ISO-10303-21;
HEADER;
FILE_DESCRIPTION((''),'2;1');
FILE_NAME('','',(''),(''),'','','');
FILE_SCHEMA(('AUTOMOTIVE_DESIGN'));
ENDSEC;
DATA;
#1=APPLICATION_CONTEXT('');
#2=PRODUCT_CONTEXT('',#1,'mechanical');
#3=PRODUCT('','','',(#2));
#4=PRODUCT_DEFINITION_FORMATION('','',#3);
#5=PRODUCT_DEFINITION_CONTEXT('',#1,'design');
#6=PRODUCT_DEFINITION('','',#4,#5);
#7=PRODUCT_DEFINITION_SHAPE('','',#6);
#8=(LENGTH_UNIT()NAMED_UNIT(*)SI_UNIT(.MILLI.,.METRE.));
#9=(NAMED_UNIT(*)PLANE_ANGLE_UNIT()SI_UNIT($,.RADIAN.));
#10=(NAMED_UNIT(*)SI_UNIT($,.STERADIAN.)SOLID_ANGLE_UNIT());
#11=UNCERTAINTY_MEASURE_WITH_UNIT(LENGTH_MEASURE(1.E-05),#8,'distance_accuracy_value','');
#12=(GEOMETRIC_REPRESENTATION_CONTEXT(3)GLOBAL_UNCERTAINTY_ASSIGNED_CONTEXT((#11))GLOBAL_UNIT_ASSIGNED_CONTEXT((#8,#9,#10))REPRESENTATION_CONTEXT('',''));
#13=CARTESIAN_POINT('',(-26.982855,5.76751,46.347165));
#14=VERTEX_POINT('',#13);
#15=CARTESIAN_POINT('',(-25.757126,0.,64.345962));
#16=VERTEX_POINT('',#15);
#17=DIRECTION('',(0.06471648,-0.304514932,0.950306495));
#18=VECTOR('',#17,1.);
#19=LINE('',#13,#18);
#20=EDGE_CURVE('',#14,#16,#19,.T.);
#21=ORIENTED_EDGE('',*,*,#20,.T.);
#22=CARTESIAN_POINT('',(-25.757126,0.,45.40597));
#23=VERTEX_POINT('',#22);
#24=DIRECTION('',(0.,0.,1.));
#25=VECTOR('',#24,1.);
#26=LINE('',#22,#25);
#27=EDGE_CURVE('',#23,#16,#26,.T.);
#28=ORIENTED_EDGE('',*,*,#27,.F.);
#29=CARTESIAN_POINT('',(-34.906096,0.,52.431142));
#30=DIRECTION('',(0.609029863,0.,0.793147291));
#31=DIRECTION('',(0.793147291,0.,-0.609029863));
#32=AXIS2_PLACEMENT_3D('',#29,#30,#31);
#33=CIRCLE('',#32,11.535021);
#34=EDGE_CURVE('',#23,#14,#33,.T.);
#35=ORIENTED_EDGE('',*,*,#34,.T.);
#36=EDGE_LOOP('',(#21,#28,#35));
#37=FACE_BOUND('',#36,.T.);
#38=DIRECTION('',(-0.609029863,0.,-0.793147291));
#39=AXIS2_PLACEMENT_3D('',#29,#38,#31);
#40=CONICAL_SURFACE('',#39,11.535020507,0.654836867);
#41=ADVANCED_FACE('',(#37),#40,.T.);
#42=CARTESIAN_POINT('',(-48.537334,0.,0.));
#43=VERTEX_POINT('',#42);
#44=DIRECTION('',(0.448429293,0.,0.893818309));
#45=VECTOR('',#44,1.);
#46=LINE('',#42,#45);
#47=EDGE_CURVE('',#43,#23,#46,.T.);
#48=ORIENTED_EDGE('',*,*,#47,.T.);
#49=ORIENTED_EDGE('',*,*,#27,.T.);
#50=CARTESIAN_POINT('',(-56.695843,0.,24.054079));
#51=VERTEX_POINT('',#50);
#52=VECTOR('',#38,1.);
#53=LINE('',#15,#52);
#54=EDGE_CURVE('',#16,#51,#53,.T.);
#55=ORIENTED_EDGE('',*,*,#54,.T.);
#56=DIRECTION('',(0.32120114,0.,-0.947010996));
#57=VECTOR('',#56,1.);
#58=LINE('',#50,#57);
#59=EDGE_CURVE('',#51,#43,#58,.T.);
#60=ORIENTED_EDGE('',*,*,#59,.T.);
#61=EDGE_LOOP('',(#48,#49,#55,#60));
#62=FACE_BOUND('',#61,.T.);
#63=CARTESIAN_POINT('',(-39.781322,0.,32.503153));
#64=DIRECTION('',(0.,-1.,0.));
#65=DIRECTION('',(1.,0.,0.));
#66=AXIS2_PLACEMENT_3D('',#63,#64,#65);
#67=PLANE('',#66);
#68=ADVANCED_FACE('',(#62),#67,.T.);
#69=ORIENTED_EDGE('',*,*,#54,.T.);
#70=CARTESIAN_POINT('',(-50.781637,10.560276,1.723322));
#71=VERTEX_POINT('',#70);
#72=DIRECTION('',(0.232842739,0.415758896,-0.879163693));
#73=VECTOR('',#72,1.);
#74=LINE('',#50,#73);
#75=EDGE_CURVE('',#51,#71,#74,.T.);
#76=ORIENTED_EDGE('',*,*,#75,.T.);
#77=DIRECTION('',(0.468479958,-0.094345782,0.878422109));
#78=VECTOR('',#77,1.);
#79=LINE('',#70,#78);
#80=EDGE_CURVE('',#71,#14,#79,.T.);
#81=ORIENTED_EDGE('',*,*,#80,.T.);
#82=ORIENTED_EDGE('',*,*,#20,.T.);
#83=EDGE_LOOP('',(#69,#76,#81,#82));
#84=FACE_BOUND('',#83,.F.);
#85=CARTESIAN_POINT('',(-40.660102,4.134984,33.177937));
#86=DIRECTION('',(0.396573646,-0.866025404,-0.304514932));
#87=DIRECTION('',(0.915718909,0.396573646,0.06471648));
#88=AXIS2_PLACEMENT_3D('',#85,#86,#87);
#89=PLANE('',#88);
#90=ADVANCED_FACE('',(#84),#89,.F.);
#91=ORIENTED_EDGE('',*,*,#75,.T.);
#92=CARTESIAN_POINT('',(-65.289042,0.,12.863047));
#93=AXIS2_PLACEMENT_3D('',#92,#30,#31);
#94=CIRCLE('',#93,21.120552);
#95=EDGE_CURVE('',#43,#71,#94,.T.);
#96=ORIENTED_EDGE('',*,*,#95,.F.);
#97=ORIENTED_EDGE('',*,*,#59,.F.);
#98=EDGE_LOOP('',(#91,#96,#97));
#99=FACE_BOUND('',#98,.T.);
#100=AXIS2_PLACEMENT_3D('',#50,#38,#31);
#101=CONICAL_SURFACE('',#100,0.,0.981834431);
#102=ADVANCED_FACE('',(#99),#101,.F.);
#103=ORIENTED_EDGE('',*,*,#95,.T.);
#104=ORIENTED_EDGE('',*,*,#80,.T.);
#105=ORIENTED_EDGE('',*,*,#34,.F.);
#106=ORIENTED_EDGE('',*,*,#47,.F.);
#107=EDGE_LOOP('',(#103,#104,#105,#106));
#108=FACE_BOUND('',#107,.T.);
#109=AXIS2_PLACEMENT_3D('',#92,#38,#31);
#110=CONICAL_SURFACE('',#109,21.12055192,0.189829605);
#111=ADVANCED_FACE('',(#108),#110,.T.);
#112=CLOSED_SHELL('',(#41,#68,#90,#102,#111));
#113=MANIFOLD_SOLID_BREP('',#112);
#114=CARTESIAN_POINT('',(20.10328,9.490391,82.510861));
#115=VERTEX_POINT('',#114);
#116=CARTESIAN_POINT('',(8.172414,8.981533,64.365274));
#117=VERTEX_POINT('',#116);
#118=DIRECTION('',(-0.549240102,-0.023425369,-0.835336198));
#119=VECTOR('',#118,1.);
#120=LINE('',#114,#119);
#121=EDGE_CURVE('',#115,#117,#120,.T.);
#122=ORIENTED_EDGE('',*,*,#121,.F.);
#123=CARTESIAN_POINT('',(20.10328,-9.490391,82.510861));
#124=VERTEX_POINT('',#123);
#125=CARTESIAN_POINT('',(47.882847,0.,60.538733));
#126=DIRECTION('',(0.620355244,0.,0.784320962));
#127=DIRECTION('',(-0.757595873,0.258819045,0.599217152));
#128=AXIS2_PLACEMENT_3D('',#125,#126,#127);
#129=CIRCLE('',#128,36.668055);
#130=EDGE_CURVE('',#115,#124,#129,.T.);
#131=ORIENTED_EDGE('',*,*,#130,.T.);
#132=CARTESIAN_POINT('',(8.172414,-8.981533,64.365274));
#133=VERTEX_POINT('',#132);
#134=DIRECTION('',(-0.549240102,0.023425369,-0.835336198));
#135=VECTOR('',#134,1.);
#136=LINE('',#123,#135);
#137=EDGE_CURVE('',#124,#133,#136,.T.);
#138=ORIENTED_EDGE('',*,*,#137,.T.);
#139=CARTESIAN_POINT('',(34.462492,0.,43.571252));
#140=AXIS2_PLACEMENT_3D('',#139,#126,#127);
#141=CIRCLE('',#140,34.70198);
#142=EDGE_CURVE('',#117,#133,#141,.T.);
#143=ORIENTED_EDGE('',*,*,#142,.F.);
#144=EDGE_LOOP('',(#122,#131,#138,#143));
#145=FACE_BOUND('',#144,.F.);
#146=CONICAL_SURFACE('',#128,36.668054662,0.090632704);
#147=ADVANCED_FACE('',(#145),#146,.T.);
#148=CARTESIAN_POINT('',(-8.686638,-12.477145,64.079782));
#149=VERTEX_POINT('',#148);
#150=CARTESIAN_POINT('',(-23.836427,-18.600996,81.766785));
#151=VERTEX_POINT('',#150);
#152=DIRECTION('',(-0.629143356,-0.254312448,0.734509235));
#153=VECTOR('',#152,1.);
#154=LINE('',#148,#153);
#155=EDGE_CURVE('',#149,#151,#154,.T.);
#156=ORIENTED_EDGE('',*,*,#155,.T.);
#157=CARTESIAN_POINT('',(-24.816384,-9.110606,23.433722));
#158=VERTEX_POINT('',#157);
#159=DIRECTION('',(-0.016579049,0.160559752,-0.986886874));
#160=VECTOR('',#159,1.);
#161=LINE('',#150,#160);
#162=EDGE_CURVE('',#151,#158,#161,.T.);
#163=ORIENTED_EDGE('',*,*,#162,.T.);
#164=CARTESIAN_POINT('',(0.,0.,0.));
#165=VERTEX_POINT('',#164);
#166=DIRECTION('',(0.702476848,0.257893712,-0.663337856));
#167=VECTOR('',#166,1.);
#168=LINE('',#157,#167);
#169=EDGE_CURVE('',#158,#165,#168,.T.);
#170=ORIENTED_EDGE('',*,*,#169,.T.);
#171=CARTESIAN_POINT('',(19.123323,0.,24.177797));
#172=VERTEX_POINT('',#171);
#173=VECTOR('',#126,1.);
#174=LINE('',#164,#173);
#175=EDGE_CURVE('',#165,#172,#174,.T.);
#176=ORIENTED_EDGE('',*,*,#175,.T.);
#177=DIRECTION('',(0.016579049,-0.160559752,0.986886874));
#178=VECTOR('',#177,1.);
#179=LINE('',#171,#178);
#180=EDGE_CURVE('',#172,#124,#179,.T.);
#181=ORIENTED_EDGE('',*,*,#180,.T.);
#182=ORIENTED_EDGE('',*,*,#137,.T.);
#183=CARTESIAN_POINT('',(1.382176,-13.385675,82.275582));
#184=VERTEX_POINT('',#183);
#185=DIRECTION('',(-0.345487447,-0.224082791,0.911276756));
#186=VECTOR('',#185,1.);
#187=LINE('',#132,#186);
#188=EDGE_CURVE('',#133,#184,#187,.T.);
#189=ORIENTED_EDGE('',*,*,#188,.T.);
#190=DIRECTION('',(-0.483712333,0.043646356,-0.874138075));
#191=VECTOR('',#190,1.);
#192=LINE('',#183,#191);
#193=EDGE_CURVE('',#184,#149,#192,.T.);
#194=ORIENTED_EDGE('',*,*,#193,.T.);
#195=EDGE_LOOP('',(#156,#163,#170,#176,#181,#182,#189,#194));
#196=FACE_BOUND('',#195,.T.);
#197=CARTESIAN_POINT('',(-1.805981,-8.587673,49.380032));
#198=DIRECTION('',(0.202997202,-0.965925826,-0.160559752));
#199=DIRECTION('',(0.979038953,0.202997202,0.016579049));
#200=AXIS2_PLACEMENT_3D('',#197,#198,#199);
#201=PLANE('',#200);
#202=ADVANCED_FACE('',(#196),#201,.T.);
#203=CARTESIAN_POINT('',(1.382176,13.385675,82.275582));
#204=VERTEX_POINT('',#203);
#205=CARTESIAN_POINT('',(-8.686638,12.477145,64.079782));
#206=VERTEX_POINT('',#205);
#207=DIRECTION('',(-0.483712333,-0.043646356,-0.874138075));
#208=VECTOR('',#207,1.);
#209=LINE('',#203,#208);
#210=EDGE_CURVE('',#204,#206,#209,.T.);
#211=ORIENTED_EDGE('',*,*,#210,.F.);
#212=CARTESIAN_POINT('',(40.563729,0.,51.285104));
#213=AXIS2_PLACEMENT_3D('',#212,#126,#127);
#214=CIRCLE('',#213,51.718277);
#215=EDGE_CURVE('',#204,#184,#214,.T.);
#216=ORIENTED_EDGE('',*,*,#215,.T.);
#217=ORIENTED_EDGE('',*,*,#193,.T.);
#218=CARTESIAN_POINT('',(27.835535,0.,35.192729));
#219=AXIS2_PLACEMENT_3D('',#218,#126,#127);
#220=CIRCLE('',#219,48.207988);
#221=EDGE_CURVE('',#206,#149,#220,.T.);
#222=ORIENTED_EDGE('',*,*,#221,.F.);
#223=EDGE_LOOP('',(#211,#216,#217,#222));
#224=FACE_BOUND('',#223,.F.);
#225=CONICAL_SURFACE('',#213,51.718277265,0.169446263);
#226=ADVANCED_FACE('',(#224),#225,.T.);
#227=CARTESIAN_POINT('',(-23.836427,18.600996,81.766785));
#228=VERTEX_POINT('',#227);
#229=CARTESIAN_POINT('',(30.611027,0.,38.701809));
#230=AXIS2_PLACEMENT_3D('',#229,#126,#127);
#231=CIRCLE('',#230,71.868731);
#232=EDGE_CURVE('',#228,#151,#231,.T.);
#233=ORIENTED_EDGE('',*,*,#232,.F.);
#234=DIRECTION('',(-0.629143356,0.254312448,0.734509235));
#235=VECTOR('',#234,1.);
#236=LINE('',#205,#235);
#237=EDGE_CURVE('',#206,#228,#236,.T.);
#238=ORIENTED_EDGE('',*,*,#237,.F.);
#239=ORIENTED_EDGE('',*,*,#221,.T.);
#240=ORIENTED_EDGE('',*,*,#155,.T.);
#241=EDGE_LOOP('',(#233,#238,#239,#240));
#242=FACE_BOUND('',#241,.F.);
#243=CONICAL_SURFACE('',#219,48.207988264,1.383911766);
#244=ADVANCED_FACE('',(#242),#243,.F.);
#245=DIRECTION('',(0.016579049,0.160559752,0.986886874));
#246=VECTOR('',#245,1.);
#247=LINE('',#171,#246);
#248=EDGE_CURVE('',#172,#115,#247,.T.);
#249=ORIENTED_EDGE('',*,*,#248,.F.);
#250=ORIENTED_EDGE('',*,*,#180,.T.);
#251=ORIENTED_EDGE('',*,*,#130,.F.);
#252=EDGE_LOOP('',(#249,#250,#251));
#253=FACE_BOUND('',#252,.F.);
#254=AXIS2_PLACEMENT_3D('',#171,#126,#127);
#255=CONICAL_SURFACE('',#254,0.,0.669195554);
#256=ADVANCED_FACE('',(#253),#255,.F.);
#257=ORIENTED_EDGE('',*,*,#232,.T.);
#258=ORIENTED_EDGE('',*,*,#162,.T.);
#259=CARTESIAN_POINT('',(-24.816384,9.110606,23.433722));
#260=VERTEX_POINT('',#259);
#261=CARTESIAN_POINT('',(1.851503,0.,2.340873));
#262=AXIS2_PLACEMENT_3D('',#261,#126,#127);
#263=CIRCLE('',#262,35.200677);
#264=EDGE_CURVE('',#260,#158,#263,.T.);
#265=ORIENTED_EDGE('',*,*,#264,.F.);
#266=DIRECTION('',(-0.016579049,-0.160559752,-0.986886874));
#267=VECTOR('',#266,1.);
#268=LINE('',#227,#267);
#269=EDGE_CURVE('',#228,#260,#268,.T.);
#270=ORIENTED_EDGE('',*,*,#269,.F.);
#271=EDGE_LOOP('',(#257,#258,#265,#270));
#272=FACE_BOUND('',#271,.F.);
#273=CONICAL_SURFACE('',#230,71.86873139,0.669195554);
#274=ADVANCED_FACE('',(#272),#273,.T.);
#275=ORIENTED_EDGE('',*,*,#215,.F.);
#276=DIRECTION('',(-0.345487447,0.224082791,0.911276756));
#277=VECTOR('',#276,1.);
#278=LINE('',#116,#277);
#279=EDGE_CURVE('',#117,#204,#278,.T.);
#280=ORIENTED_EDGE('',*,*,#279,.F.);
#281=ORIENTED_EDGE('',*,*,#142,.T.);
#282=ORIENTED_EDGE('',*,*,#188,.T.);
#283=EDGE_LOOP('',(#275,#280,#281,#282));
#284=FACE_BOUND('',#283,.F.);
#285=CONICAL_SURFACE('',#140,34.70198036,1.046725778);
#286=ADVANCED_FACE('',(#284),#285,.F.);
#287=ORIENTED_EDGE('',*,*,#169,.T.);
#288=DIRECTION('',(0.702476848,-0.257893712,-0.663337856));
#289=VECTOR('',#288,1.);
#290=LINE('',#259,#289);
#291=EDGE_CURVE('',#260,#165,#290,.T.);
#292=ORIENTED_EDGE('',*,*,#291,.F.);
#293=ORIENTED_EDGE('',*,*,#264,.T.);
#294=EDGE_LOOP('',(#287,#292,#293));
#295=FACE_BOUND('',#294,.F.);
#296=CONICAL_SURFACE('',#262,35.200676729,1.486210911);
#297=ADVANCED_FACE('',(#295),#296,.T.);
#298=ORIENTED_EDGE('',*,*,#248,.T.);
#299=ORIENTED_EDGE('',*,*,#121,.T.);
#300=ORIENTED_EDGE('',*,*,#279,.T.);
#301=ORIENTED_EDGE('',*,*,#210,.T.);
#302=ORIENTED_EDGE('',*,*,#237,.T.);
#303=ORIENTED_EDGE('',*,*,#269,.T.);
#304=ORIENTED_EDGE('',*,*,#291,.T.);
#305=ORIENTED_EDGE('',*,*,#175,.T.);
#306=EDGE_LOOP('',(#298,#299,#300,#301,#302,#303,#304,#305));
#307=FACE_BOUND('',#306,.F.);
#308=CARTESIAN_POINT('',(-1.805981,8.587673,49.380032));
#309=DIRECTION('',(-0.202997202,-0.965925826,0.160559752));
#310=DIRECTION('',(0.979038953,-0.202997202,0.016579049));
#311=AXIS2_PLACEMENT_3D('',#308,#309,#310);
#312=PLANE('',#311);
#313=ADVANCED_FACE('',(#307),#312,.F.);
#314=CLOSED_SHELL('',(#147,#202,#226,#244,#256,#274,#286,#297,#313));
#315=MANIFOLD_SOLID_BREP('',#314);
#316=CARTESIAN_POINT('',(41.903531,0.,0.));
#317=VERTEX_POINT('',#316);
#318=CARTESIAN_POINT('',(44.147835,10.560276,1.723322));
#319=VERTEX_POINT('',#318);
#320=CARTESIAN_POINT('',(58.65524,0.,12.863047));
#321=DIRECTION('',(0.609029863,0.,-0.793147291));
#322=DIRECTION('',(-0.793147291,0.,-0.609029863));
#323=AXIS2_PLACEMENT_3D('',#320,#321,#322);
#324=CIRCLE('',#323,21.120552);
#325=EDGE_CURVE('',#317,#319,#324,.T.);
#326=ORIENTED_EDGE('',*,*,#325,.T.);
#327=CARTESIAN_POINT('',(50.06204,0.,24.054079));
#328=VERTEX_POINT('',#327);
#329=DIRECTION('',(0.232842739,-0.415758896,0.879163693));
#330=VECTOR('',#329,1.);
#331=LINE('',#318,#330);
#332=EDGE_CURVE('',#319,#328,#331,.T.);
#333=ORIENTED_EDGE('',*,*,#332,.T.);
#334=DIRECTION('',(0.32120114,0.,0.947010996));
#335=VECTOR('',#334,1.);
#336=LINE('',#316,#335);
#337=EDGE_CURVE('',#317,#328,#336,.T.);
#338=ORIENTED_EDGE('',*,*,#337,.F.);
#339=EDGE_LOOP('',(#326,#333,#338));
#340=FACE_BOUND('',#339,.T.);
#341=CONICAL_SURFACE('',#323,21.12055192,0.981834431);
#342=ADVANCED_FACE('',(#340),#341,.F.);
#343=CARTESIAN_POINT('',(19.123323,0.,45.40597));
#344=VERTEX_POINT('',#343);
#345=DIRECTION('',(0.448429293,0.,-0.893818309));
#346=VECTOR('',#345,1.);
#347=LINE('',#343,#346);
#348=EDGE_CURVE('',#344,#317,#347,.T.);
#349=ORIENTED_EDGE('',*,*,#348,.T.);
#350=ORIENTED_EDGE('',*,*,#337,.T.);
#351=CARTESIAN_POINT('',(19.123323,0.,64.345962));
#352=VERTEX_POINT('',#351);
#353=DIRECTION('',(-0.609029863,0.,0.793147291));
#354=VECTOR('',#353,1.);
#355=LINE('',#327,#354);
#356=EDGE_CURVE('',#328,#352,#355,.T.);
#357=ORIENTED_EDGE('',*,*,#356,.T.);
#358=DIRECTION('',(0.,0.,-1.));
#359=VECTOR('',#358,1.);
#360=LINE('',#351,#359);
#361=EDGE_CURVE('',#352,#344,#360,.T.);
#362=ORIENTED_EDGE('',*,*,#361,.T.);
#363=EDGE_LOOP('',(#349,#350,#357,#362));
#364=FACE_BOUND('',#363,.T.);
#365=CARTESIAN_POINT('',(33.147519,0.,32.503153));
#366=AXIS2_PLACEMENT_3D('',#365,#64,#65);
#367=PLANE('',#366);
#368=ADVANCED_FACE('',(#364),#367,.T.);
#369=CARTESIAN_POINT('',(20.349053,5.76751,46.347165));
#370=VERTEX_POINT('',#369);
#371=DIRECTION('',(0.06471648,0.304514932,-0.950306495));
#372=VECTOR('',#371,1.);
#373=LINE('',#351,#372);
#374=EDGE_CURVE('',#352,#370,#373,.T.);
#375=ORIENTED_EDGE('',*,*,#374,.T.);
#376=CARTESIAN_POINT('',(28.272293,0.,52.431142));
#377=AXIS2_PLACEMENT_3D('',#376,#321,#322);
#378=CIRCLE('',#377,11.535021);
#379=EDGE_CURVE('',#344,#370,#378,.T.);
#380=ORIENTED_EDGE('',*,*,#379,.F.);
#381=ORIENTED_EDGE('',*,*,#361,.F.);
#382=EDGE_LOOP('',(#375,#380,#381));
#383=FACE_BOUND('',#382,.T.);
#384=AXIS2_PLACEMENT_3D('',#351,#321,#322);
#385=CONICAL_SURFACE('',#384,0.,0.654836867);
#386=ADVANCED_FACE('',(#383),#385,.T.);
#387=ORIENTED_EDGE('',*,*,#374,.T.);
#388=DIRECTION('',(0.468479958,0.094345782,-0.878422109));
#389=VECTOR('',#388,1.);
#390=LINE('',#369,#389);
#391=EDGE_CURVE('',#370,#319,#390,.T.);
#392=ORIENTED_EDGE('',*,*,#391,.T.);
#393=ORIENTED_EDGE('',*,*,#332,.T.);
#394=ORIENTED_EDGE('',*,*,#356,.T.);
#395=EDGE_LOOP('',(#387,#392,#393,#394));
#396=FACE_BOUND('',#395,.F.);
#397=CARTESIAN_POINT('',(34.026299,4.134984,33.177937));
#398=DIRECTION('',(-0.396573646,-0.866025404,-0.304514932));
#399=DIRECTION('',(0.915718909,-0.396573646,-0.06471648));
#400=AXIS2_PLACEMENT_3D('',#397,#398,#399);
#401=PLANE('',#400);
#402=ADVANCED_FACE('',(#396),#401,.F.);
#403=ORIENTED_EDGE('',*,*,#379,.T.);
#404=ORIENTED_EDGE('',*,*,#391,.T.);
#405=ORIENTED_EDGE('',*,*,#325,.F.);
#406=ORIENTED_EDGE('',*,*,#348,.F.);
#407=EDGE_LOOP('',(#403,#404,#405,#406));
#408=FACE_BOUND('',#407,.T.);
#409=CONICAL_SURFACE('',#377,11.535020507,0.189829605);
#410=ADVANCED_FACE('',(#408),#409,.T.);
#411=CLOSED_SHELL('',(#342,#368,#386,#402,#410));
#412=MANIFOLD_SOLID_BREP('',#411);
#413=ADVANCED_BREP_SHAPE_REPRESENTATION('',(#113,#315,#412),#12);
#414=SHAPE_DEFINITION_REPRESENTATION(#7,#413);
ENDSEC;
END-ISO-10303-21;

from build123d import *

# Parameters (mm, degrees)
F1_ANGLE_BACK = 15
F1_ANGLE      = 30
F2_ANGLE      = 30
F3_ANGLE      = 30


with BuildPart() as f1:
    # F0 (on Front) → F1 (revolve)
    with BuildSketch(Plane.XZ, mode=Mode.PRIVATE) as f1_sk:
        Polygon((-25.7571255401, 24.1777971488), (0, 0), (19.1233232134, 24.1777971488), (19.1233232134, 45.4059700859), (19.1233232134, 64.3459617069), (19.1233232134, 83.2859533279), (7.2450009175, 65.0988072157), (0, 83.3688080311), (-9.9750002846, 65.0988072157), (-25.7571255401, 83.2859533279), (-25.7571255401, 64.3459617069), (-25.7571255401, 45.4059700859), align=None)
    revolve(f1_sk.sketch.rotate(Axis((9.5616616067, 0, 12.0888985744), (0.6203552442, 0, 0.7843209617)), -F1_ANGLE_BACK), axis=Axis((9.5616616067, 0, 12.0888985744), (0.6203552442, 0, 0.7843209617)), revolution_arc=F1_ANGLE)


with BuildPart() as f2:
    # F0 (on Front) → F2 (revolve)
    with BuildSketch(Plane.XZ):
        Polygon((19.1233232134, 64.3459617069), (19.1233232134, 45.4059700859), (41.9035313019, 0), (50.0620402672, 24.0540793102), align=None)
    revolve(axis=Axis((34.5926817403, 0, 44.2000205086), (0.6090298633, 0, -0.7931472913)), revolution_arc=F2_ANGLE)


with BuildPart() as f3:
    # F0 (on Front) → F3 (revolve)
    with BuildSketch(Plane.XZ):
        Polygon((-48.5373336286, 0), (-25.7571255401, 45.4059700859), (-25.7571255401, 64.3459617069), (-56.6958425939, 24.0540793102), align=None)
    revolve(axis=Axis((-41.226484067, 0, 44.2000205086), (0.6090298633, 0, 0.7931472913)), revolution_arc=F3_ANGLE)


solid = Compound([f1.part, f2.part, f3.part])
